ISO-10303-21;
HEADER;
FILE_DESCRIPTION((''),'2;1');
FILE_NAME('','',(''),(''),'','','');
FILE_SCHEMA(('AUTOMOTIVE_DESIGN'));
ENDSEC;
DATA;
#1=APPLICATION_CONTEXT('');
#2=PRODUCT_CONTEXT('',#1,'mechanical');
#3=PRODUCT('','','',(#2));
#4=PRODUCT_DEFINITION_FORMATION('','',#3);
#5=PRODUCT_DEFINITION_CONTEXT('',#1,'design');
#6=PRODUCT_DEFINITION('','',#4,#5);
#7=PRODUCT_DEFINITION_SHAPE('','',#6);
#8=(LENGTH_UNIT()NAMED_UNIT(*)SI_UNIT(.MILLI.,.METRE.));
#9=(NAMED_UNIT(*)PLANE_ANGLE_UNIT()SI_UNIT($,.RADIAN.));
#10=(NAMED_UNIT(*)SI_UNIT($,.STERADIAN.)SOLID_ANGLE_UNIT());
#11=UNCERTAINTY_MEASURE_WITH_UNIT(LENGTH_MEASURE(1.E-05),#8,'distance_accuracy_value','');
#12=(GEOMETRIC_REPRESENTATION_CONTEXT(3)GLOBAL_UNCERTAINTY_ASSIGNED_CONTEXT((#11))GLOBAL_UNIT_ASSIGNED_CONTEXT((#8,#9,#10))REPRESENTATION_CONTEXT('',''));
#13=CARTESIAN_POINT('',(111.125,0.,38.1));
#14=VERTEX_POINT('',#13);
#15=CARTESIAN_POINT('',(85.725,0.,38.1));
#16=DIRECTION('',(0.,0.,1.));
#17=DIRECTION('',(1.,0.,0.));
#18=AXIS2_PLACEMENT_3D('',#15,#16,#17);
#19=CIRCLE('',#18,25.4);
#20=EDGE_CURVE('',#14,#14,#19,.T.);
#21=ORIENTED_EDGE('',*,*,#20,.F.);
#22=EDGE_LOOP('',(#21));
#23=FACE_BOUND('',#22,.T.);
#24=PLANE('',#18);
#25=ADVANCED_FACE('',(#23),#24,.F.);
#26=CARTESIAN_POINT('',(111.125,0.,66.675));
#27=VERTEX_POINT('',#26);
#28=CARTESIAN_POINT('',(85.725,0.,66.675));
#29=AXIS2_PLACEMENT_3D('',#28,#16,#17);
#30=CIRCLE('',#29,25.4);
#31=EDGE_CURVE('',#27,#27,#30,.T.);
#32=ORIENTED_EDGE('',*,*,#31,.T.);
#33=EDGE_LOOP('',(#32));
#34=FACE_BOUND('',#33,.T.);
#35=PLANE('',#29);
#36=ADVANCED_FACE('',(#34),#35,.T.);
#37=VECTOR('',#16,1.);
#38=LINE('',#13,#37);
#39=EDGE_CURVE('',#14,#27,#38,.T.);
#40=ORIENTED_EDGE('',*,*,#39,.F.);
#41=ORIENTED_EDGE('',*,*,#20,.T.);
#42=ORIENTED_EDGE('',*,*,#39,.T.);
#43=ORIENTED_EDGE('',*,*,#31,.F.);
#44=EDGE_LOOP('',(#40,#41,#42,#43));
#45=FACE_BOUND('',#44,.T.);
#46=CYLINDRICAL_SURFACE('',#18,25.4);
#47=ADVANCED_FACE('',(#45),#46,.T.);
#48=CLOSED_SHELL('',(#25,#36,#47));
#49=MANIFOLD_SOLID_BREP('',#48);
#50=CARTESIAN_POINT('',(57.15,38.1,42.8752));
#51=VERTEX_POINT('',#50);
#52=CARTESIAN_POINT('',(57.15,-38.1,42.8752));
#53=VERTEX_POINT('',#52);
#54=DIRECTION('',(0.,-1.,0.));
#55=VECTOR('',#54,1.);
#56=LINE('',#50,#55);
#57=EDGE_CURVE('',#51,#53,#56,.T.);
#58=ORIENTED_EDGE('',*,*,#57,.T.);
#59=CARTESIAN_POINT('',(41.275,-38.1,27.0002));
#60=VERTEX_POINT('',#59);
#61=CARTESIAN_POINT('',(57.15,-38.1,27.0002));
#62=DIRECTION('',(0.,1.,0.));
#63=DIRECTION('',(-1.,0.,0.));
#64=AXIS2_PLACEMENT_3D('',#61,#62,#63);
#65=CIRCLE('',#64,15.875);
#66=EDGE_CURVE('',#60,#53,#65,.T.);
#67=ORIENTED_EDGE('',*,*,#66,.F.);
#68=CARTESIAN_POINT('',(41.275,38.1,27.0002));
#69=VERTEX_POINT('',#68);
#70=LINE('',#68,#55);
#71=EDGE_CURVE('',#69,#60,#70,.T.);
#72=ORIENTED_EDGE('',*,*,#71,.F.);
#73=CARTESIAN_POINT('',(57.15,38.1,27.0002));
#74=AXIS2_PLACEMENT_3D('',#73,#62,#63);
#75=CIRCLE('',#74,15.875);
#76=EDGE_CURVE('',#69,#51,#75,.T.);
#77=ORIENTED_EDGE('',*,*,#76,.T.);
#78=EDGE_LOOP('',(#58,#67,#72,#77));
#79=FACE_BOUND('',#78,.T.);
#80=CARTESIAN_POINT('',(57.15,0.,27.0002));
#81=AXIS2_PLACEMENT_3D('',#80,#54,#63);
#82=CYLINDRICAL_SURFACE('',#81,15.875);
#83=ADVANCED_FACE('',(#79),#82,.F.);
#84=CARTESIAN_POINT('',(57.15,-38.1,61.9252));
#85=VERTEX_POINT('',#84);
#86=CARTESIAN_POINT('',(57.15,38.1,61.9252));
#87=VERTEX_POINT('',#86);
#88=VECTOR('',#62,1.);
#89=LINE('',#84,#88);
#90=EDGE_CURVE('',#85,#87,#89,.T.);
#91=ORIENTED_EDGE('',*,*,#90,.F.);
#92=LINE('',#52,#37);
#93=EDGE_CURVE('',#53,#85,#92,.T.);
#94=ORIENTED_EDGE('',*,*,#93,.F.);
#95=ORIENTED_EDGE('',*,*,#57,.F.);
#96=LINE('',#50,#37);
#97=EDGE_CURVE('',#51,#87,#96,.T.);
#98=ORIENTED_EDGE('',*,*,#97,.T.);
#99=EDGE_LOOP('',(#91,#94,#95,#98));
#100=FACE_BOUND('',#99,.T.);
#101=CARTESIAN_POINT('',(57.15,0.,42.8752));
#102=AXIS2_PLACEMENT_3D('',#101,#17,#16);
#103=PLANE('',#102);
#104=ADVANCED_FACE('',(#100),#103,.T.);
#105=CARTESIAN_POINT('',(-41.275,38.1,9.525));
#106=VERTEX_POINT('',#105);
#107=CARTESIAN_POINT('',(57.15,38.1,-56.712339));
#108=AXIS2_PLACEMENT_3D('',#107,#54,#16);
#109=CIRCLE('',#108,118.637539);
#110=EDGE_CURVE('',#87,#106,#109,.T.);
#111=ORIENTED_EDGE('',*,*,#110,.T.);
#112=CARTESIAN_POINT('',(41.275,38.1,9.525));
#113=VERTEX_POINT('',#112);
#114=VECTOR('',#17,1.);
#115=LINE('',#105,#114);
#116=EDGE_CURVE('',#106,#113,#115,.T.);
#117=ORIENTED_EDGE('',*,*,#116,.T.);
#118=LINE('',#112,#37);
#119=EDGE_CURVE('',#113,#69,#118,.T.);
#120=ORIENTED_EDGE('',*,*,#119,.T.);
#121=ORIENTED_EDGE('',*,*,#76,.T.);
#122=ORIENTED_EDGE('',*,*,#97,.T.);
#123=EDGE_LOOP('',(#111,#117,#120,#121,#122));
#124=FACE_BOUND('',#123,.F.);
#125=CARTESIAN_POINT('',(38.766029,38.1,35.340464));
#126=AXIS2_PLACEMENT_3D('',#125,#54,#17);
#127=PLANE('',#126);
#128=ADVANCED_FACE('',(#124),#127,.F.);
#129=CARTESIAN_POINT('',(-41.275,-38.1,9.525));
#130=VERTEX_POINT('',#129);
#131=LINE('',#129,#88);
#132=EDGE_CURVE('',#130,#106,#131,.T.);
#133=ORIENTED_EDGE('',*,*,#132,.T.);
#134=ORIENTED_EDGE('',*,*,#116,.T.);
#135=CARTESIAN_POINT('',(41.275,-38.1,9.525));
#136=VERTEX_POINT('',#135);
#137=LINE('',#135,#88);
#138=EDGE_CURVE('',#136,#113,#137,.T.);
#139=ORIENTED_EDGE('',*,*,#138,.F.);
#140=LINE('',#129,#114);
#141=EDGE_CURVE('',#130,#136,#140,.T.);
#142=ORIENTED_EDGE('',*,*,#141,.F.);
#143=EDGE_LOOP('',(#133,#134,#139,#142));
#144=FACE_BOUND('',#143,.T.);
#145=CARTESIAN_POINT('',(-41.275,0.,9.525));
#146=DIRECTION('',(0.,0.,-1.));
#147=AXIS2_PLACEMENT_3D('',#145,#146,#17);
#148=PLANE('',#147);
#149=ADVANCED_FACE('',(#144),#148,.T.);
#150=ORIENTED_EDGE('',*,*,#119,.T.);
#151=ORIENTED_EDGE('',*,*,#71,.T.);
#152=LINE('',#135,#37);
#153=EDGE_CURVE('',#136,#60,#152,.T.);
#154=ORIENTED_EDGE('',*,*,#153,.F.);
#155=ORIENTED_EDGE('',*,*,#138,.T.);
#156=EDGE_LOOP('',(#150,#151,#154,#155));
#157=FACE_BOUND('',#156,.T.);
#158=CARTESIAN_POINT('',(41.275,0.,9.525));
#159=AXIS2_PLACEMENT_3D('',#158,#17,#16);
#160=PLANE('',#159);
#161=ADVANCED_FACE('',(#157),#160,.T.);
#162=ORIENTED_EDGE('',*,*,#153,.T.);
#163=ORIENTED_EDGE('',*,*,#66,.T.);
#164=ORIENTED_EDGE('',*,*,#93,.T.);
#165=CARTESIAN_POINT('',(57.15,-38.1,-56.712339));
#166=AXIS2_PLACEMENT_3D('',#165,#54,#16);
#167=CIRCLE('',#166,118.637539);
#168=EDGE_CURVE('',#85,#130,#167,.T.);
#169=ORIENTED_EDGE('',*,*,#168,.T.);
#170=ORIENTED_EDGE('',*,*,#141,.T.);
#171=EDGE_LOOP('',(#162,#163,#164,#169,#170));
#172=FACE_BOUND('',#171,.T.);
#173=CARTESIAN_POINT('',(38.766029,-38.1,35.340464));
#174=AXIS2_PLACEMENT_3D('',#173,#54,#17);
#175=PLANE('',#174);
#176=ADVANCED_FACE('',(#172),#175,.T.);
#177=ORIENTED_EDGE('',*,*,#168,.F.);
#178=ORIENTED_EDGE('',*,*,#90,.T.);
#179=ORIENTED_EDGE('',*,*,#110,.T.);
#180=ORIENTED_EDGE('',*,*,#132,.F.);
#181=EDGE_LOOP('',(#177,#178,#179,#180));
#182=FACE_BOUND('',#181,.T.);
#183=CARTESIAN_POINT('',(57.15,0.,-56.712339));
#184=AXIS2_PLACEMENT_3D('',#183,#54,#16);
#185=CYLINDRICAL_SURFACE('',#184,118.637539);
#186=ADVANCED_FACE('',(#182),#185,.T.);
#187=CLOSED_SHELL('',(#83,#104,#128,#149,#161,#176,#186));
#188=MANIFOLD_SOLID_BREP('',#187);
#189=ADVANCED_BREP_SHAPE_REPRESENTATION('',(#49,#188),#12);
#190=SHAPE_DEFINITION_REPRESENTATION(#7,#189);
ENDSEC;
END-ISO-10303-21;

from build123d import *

# Parameters (mm, degrees)
F2_DEPTH = 38.1


# Not quite as in the source:
# - the program builds the solid bodies; features that only make, move or delete a surface that nothing else refers to are left out


with BuildPart() as f2:
    # F0 (on Front) → F2 (new body, symmetric)
    with BuildSketch(Plane.XZ):
        with BuildLine():
            Line((22.225, 9.525), (41.275, 9.525))
            Line((41.275, 9.525), (41.275, 27.0002))
            ThreePointArc((41.275, 27.0002), (45.9246798487, 38.2255201513), (57.15, 42.8752))
            Line((57.15, 42.8752), (57.15, 61.9252))
            ThreePointArc((57.15, 61.9252), (32.4542956671, 51.6959043329), (22.225, 27.0002))
            Line((22.225, 27.0002), (22.225, 9.525))
        make_face()
        with BuildLine():
            ThreePointArc((57.15, 61.9252), (1.3977319182, 48.0089590969), (-41.275, 9.525))
            Line((-41.275, 9.525), (22.225, 9.525))
            Line((22.225, 9.525), (22.225, 27.0002))
            ThreePointArc((22.225, 27.0002), (32.4542956671, 51.6959043329), (57.15, 61.9252))
        make_face()
    extrude(amount=F2_DEPTH, both=True)


with BuildPart() as f3:
    # F0 (on Front) → F3 (revolve)
    with BuildSketch(Plane.XZ):
        Polygon((85.725, 66.675), (85.725, 61.9252), (85.725, 52.3875), (85.725, 42.8752), (85.725, 38.1), (111.125, 38.1), (111.125, 66.675), align=None)
    revolve(axis=Axis((85.725, 0, 50.0126), (0, 0, 1)))


solid = Compound([f2.part, f3.part])
